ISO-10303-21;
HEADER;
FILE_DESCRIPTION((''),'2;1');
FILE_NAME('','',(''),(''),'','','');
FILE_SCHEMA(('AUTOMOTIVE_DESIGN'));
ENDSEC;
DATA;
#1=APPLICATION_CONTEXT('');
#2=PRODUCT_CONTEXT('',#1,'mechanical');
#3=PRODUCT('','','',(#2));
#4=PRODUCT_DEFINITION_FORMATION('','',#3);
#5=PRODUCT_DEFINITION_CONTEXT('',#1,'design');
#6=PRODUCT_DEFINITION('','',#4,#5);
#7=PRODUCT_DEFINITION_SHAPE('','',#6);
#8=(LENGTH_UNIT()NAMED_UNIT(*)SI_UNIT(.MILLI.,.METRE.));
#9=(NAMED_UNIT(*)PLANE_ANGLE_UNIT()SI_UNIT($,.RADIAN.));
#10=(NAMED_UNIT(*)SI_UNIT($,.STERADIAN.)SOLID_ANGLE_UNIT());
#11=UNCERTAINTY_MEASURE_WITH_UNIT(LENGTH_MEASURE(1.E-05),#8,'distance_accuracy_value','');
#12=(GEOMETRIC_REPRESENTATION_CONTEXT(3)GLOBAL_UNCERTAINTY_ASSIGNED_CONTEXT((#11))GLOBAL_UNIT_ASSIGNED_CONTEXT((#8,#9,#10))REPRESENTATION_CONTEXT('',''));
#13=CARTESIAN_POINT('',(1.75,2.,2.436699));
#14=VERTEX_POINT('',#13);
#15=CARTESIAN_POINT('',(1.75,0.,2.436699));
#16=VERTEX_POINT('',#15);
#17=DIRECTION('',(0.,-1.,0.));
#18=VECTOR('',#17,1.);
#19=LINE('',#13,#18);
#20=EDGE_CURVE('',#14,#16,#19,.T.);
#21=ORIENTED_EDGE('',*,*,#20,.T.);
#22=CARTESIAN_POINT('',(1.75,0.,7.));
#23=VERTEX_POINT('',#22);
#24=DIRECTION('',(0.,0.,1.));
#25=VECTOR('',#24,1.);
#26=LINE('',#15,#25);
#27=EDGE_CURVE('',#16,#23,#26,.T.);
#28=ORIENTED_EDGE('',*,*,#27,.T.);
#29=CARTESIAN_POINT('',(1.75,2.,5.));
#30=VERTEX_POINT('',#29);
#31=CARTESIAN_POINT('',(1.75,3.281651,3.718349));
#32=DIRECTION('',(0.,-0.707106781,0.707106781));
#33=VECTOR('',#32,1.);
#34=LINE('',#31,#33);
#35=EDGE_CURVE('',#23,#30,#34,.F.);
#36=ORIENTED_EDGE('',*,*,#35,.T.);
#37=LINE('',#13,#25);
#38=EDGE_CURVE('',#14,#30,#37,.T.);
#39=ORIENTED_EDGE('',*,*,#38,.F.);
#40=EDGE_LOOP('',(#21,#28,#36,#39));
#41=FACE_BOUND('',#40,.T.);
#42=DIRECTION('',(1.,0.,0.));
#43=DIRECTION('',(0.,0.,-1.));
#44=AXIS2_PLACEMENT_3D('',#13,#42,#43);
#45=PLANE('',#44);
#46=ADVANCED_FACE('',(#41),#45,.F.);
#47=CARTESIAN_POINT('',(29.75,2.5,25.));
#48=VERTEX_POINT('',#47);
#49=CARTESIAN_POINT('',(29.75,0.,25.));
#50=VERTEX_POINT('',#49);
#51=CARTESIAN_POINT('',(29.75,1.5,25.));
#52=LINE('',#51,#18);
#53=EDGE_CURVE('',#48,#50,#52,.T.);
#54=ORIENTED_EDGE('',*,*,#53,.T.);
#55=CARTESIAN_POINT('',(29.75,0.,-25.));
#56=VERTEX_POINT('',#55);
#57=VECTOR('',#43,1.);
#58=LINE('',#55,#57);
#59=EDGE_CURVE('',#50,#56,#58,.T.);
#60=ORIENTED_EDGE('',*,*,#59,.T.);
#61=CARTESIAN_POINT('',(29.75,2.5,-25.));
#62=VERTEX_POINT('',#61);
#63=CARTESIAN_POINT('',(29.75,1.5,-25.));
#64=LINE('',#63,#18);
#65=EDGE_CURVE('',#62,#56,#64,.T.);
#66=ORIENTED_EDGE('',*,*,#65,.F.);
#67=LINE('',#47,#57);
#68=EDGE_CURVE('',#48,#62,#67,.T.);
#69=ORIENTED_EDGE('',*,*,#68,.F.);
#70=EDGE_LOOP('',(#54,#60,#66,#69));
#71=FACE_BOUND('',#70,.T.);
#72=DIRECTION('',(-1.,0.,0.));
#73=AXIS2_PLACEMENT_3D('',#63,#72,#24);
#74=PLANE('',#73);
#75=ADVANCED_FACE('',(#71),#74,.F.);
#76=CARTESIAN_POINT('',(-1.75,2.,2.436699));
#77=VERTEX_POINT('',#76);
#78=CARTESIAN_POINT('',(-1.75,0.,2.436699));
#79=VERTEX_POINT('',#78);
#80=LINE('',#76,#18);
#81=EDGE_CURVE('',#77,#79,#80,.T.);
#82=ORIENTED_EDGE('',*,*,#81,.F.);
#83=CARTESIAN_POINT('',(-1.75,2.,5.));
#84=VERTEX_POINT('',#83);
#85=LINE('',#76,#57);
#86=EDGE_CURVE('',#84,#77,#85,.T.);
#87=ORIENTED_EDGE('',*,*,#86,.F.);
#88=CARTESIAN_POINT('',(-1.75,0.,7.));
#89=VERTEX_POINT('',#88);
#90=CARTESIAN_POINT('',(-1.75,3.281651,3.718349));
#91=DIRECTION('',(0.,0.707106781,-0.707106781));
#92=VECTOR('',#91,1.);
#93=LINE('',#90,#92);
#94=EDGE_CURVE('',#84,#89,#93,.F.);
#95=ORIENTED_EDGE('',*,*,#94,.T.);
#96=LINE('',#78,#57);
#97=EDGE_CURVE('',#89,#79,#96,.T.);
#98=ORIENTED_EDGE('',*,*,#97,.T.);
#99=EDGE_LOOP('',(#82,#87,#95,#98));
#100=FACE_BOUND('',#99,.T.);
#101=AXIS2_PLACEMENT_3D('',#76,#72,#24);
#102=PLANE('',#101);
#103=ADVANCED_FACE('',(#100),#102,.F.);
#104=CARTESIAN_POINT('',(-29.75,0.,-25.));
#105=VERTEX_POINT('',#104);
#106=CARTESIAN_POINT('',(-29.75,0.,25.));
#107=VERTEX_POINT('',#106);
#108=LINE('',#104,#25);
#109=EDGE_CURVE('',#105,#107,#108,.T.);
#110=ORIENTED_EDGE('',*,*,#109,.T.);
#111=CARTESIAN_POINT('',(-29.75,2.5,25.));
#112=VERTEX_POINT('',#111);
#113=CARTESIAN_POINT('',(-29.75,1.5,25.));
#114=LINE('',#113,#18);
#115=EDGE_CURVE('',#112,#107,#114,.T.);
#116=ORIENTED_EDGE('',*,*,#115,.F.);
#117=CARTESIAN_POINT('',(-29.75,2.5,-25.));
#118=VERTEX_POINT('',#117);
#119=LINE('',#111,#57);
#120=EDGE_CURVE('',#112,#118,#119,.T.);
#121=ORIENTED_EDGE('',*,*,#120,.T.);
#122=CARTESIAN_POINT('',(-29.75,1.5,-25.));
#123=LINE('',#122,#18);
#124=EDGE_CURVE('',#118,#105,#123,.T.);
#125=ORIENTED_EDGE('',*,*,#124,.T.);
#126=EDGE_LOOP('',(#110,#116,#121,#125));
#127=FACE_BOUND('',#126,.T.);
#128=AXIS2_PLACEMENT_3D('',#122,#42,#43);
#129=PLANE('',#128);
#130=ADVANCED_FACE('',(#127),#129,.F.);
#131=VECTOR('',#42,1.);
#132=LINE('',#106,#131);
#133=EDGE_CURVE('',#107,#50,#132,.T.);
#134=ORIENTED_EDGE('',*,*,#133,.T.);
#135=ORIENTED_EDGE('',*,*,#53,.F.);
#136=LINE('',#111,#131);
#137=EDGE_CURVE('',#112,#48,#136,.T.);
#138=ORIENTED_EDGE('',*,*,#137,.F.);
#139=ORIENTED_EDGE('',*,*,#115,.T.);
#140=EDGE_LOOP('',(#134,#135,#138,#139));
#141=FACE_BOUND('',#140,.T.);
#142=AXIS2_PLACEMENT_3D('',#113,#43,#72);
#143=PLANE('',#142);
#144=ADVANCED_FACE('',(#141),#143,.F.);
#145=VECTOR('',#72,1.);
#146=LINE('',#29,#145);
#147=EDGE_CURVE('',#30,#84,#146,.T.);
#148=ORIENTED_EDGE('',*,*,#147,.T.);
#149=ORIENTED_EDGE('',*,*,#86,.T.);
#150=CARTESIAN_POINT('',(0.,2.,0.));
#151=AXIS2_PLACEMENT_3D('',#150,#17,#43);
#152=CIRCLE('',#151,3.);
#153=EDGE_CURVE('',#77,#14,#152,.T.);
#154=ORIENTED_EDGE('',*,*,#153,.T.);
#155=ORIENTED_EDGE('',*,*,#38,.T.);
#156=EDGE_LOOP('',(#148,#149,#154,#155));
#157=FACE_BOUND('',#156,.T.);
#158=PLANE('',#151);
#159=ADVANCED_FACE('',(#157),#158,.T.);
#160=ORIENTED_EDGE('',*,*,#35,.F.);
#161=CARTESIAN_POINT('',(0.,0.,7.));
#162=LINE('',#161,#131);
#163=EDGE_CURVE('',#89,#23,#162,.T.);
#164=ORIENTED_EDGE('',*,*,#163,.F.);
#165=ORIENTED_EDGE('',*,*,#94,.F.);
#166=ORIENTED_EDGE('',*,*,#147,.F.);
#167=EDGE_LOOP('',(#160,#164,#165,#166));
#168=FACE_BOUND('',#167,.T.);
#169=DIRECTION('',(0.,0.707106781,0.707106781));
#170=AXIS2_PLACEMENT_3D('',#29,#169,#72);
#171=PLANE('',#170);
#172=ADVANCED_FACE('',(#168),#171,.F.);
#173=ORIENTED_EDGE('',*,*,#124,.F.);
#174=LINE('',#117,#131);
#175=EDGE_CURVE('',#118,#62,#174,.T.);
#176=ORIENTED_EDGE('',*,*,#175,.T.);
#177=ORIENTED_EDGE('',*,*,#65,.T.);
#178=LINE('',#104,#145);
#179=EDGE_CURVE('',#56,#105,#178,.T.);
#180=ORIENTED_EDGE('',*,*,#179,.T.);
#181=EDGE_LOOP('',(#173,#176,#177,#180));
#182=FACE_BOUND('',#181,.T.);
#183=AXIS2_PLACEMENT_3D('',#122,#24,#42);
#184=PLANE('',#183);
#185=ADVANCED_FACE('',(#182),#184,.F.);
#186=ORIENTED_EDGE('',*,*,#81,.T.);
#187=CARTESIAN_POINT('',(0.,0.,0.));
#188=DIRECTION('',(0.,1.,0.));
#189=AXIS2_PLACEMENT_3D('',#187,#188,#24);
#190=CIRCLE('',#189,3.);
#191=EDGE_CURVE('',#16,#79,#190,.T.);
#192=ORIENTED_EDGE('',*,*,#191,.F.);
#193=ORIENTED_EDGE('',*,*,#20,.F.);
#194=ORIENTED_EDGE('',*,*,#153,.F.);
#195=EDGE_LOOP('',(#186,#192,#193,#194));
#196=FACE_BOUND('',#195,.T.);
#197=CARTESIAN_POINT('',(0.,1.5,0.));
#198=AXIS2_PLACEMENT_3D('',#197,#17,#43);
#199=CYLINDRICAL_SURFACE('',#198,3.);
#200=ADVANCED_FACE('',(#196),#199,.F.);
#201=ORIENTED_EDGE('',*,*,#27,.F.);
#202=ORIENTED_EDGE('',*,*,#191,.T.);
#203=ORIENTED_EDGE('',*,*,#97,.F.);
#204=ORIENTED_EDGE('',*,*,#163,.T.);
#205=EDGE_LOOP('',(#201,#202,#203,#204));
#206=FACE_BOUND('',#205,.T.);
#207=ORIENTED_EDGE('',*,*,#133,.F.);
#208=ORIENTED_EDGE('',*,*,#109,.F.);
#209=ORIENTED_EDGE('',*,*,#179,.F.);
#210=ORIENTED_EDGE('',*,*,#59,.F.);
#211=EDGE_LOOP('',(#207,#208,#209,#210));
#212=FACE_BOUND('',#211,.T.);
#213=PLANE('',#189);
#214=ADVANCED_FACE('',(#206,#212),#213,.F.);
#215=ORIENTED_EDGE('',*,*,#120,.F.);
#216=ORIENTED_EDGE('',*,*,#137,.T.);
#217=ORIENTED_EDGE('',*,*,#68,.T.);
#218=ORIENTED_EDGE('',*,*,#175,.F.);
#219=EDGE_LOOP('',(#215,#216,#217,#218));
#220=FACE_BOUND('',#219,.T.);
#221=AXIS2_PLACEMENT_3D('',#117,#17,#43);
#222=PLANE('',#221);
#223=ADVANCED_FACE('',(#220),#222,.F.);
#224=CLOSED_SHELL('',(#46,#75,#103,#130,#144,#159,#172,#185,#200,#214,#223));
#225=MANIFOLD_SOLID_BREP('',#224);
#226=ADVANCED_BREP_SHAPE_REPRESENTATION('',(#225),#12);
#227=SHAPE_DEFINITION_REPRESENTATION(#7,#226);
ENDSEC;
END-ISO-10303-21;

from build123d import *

# Parameters (mm, degrees)
SKETCH1_W           = 59.5
SKETCH1_H           = 50
SKETCH1_R           = 3
BOSS_EXTRUDE1_DEPTH = 1.5
BOSS_EXTRUDE2_DEPTH = 50
CUT_EXTRUDE1_DEPTH  = 2
CHAMFER1_SIZE       = 2
SKETCH4_W           = 59.5
SKETCH4_H           = 1.892701509
CUT_EXTRUDE2_DEPTH  = 59.318629099


with BuildPart() as part:
    # Sketch1 → Boss-Extrude1 (new body)
    with BuildSketch(Plane(origin=(0, 0, 0), x_dir=(1, 0, 0), z_dir=(0, 1, 0))):
        Rectangle(SKETCH1_W, SKETCH1_H)
        with Locations(Location((0, 0, 0), (0, 0, 270))):
            Circle(SKETCH1_R, mode=Mode.SUBTRACT)
    extrude(amount=BOSS_EXTRUDE1_DEPTH)

    # Sketch2 → Boss-Extrude2 (add)
    with BuildSketch(Plane(origin=(0, 0, -25), x_dir=(-1, 0, 0), z_dir=(0, 0, -1))):
        Polygon((-29.75, 1.5), (29.75, 1.5), (29.75, 2.5), (28.56, 4), (27.37, 2.5), (26.18, 4), (24.99, 2.5), (23.8, 4), (22.61, 2.5), (21.42, 4), (20.23, 2.5), (19.04, 4), (17.85, 2.5), (16.66, 4), (15.47, 2.5), (14.28, 4), (13.09, 2.5), (11.9, 4), (10.71, 2.5), (9.52, 4), (8.33, 2.5), (7.14, 4), (5.95, 2.5), (4.76, 4), (3.57, 2.5), (2.38, 4), (1.19, 2.5), (0, 4), (-1.19, 2.5), (-2.38, 4), (-3.57, 2.5), (-4.76, 4), (-5.95, 2.5), (-7.14, 4), (-8.33, 2.5), (-9.52, 4), (-10.71, 2.5), (-11.9, 4), (-13.09, 2.5), (-14.28, 4), (-15.47, 2.5), (-16.66, 4), (-17.85, 2.5), (-19.04, 4), (-20.23, 2.5), (-21.42, 4), (-22.61, 2.5), (-23.8, 4), (-24.99, 2.5), (-26.18, 4), (-27.37, 2.5), (-28.56, 4), (-29.75, 2.5), align=None)
    extrude(amount=-BOSS_EXTRUDE2_DEPTH)

    # Sketch3 → Cut-Extrude1 (cut)
    with BuildSketch(Plane(origin=(0, 0, 0), x_dir=(-1, 0, 0), z_dir=(0, -1, 0))):
        with BuildLine():
            Line((-1.75, -2.436698586), (-1.75, -5))
            Line((-1.75, -5), (1.75, -5))
            Line((1.75, -5), (1.75, -2.436698586))
            ThreePointArc((1.75, -2.436698586), (0, 3), (-1.75, -2.436698586))
        make_face()
    extrude(amount=-CUT_EXTRUDE1_DEPTH, mode=Mode.SUBTRACT)

    # Chamfer1
    chamfer1_edges = [part.edges().sort_by_distance(p)[0] for p in [
        (0, 0, 5),
    ]]
    chamfer(chamfer1_edges, length=CHAMFER1_SIZE - 0.0001)  # a hair under: the kernel refuses the full size

    # Sketch4 → Cut-Extrude2 (cut, through all)
    with BuildSketch(Plane.XY.offset(25)):
        with Locations((0, 3.446350755)):
            Rectangle(SKETCH4_W, SKETCH4_H)
    extrude(amount=-CUT_EXTRUDE2_DEPTH, mode=Mode.SUBTRACT)


solid = part.part
